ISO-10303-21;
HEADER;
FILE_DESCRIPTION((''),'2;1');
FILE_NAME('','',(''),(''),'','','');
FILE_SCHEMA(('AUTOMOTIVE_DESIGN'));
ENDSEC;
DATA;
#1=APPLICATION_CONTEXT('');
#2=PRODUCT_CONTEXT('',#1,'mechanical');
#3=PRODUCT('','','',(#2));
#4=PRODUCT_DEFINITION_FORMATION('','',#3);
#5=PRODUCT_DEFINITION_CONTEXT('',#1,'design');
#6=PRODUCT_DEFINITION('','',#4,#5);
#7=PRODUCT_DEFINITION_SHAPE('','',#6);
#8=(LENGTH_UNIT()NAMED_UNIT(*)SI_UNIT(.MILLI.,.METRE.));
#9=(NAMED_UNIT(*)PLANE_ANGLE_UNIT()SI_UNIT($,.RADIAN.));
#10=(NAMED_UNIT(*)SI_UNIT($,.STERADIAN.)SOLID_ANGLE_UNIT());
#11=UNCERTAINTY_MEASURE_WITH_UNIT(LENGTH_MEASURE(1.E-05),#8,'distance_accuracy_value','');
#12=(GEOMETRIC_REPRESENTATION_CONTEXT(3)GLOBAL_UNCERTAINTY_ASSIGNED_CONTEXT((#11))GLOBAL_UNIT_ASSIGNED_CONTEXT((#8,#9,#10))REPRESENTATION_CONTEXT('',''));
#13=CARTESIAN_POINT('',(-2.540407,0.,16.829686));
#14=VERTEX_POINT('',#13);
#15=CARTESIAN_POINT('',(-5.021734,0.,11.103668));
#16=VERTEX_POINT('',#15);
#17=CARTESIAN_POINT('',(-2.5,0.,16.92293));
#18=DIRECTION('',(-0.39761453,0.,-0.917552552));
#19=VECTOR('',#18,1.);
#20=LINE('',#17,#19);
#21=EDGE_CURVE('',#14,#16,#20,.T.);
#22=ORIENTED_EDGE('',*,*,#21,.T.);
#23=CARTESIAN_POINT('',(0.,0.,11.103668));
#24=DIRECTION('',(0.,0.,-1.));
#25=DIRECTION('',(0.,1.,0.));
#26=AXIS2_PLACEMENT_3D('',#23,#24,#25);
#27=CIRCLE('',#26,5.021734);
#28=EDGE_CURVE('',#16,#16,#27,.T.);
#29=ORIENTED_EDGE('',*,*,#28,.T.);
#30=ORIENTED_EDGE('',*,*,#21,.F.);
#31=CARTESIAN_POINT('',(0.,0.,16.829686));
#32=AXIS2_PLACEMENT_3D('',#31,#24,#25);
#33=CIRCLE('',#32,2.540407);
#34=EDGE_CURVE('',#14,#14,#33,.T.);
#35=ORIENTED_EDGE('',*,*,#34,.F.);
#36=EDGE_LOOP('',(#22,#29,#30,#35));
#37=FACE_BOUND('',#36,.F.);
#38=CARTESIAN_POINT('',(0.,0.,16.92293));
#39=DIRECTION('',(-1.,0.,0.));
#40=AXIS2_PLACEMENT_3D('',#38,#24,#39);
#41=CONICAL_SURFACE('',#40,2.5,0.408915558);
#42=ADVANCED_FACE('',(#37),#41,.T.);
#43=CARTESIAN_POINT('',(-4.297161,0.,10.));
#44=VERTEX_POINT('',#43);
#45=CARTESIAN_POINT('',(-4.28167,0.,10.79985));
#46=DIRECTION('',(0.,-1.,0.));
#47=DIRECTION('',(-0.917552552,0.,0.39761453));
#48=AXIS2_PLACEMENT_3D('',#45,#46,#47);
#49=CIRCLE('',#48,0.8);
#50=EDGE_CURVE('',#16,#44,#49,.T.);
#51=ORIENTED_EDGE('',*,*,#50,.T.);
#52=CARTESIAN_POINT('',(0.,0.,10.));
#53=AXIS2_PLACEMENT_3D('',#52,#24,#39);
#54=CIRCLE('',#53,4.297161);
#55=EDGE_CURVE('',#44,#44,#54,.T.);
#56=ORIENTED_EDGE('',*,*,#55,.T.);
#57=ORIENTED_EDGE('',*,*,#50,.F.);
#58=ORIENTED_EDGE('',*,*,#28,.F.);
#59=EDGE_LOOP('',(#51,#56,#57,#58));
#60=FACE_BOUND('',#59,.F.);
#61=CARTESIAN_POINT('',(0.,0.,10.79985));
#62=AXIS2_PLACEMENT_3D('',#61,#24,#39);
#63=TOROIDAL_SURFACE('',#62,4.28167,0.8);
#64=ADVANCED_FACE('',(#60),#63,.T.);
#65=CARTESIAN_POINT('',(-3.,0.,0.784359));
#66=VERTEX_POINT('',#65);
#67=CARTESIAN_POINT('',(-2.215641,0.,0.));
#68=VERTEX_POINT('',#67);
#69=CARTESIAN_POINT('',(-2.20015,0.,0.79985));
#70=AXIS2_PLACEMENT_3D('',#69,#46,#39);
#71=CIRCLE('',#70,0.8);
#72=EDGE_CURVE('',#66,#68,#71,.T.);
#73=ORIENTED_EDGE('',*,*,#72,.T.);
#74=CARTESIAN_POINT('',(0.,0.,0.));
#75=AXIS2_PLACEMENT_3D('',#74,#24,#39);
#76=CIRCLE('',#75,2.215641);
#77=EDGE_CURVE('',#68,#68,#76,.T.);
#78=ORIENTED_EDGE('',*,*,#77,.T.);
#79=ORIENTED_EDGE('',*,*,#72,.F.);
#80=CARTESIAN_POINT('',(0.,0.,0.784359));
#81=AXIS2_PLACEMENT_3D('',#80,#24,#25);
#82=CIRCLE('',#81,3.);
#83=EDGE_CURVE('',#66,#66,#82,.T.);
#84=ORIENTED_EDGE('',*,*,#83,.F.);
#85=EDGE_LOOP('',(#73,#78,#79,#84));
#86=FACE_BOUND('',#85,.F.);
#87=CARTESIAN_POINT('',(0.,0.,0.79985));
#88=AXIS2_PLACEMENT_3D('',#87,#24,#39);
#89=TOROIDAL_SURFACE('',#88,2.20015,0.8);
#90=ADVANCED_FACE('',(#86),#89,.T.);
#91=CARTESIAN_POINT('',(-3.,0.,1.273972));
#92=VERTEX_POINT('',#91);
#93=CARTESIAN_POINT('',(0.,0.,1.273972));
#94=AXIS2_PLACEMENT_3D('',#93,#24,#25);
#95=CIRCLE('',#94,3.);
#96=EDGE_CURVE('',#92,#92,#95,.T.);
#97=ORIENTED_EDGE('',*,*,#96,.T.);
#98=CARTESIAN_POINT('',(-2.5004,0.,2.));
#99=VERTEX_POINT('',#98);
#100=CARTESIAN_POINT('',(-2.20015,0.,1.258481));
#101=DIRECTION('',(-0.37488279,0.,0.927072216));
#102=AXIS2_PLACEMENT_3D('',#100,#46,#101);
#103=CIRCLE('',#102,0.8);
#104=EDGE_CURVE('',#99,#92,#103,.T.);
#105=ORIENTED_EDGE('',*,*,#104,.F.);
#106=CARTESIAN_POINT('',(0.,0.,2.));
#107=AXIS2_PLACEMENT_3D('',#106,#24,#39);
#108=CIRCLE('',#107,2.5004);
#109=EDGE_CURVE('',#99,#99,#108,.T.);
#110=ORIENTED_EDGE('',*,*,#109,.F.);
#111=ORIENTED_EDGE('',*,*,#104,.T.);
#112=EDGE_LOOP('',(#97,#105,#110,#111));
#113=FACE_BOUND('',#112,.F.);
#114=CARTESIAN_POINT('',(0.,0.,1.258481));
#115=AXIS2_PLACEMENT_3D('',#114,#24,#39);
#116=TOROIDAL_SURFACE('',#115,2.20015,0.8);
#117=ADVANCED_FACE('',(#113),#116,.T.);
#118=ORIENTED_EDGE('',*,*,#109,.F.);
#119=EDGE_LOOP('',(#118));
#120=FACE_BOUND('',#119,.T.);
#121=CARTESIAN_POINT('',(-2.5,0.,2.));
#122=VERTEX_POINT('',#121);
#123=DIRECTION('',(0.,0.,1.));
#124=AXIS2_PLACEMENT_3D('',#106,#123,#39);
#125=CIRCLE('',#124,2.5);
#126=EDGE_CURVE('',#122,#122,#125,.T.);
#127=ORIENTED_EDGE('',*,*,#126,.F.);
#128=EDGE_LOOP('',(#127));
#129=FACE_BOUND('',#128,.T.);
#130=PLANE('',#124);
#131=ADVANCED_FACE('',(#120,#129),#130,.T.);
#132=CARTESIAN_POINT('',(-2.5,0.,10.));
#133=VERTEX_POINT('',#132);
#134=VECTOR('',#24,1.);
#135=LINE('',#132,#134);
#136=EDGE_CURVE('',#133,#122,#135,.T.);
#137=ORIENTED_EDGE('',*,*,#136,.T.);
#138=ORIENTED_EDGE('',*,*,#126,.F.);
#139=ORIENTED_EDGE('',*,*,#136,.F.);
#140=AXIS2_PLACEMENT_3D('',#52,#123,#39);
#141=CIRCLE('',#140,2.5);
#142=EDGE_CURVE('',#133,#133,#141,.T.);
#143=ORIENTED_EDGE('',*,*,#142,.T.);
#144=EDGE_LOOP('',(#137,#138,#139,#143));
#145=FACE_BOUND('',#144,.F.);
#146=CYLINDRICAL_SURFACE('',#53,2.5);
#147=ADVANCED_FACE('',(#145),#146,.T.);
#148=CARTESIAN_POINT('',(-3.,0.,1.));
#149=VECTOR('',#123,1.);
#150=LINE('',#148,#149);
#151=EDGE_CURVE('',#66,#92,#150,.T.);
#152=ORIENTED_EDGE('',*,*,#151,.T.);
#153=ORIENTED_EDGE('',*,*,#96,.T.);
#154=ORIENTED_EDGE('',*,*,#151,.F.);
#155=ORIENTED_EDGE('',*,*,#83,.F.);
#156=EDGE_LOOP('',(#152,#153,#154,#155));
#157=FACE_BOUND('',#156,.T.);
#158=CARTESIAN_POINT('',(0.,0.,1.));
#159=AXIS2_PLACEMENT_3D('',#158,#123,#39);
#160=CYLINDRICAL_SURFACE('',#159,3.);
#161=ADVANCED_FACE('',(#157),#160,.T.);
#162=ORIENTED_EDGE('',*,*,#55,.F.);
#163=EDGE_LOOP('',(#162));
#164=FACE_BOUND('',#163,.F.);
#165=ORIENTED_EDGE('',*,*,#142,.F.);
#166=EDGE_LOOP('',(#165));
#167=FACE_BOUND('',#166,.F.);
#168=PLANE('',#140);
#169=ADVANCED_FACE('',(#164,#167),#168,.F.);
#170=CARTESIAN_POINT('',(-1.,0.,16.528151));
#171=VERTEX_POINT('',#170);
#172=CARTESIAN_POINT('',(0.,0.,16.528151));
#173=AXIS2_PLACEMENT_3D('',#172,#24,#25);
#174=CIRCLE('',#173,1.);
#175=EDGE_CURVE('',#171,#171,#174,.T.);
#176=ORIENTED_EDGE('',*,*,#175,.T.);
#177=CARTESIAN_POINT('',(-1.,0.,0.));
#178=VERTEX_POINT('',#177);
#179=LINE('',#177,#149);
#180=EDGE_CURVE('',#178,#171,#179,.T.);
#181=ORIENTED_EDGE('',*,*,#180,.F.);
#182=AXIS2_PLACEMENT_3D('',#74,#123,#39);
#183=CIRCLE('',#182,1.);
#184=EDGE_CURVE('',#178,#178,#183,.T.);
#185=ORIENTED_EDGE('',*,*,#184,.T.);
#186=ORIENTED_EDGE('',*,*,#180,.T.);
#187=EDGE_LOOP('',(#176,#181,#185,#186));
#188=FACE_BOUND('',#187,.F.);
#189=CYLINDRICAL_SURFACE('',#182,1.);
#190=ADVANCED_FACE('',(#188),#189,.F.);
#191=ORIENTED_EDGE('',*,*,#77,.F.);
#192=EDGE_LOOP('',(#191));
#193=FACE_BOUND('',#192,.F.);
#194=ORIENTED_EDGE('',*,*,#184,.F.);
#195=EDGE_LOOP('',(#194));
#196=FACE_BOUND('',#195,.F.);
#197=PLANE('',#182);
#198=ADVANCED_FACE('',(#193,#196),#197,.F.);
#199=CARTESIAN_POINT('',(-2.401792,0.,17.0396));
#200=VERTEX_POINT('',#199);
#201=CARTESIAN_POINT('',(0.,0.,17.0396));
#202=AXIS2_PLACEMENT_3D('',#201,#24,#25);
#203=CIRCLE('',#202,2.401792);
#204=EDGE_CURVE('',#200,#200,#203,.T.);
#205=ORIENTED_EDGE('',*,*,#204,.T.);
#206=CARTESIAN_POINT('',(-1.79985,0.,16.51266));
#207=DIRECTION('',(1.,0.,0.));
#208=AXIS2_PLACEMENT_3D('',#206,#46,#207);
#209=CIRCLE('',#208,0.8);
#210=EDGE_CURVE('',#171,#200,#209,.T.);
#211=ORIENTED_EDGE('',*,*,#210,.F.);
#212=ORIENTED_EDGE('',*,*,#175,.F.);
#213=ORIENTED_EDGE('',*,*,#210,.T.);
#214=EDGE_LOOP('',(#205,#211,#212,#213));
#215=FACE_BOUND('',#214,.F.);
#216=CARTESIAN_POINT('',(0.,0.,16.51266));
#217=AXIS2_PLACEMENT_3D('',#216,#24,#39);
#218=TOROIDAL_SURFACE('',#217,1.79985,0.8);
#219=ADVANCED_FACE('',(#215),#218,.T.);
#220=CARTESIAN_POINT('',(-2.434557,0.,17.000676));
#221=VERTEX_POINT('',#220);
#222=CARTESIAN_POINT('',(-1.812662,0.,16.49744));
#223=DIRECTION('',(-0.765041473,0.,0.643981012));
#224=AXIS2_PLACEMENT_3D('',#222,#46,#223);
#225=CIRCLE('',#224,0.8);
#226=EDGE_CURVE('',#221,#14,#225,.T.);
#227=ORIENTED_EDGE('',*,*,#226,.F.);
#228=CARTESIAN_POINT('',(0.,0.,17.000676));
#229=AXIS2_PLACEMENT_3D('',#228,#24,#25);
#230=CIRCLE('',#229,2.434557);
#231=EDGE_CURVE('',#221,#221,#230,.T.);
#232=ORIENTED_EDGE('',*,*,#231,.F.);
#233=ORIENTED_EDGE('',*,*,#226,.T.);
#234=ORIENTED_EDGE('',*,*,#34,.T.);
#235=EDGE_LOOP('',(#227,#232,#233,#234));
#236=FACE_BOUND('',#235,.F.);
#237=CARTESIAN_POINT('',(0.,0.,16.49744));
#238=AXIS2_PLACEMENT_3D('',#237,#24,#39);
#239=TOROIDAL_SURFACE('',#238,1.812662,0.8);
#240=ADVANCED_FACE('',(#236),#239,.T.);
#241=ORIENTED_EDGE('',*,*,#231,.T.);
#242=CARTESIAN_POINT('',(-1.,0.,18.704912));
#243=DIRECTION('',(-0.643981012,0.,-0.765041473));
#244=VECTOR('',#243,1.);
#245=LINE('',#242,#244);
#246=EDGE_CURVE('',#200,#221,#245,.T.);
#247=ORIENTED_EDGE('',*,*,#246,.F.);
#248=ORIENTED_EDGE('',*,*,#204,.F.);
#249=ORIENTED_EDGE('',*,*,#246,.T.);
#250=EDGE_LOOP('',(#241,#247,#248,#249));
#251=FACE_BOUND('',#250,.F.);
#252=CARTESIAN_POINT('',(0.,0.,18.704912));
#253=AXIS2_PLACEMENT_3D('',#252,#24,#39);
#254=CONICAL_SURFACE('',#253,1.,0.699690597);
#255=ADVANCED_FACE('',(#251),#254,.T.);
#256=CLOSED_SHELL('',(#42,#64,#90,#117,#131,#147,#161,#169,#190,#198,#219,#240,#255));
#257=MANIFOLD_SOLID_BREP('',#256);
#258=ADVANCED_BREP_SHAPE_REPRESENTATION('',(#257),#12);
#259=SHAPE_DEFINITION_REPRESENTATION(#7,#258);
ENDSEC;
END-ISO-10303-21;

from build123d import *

# Parameters (mm, degrees)
F0_W = 0.5
F0_H = 2


# Not quite as in the source:
# - a fillet or chamfer that OpenCascade refuses, or shapes differently, is made with other operations: its cross-section is extruded or revolved along the edge and cut away or added


with BuildPart() as f1:
    # F0 (on Front) → F1 (revolve)
    with BuildSketch(Plane.XZ):
        Polygon((-2.5, 0), (-1, 0), (-1, 18.7049116939), (-2.5, 16.9229302555), (-5.5, 10), (-2.5, 10), (-2.5, 2), align=None)
        with Locations((-2.75, 1)):
            Rectangle(F0_W, F0_H)
    revolve(axis=Axis((0, 0, 13.3904740214), (0, 0, 1)))

    # F2: fillet of radius 0.8 on 5 edges, made by hand

    # F2_s1 → F2_t2 (revolve, cut)
    with BuildSketch(Plane.XZ):
        with BuildLine():
            ThreePointArc((-2.424695214, 17.0126243355), (-2.4928760132, 16.918520212), (-2.546704077, 16.8155311495))
            Line((-2.546704077, 16.8155311495), (-2.5613849178, 16.821892982))
            ThreePointArc((-2.5613849178, 16.821892982), (-2.5379640629, 16.8755627139), (-2.5146808408, 16.929292088))
            Line((-2.5146808408, 16.929292088), (-2.5122406636, 16.9332339517))
            ThreePointArc((-2.5122406636, 16.9332339517), (-2.4745308925, 16.9780326932), (-2.4369358776, 17.0229280317))
            Line((-2.4369358776, 17.0229280317), (-2.424695214, 17.0126243355))
        make_face()
    revolve(axis=Axis((0, 0, 16.9229302555), (0, 0, 1)), mode=Mode.SUBTRACT)

    # F2_s3 → F2_t4 (revolve, cut)
    with BuildSketch(Plane.XZ):
        with BuildLine():
            ThreePointArc((-5.0157118449, 11.1179416236), (-4.9504273448, 10.3608017674), (-4.2816698032, 9.99985))
            Line((-4.2816698032, 9.99985), (-4.2816698032, 9.98385))
            ThreePointArc((-4.2816698032, 9.98385), (-4.8908349016, 9.984), (-5.5, 9.984))
            Line((-5.5, 9.984), (-5.5146808408, 10.0063618325))
            ThreePointArc((-5.5146808408, 10.0063618325), (-5.2724679468, 10.5653028232), (-5.0303926857, 11.1243034561))
            Line((-5.0303926857, 11.1243034561), (-5.0157118449, 11.1179416236))
        make_face()
    revolve(axis=Axis((0, 0, 10), (0, 0, 1)), mode=Mode.SUBTRACT)

    # F2_s5 → F2_t6 (revolve, cut)
    with BuildSketch(Plane.XZ):
        with BuildLine():
            ThreePointArc((-0.99985, 16.5126600652), (-1.5256480152, 17.2642006639), (-2.4118831788, 17.0278448749))
            Line((-2.4118831788, 17.0278448749), (-2.4241238423, 17.0381485711))
            ThreePointArc((-2.4241238423, 17.0381485711), (-1.7181248748, 17.876633682), (-1.0122406636, 18.7152153901))
            Line((-1.0122406636, 18.7152153901), (-0.984, 18.7049116939))
            ThreePointArc((-0.984, 18.7049116939), (-0.984, 17.6087858796), (-0.98385, 16.5126600652))
            Line((-0.98385, 16.5126600652), (-0.99985, 16.5126600652))
        make_face()
    revolve(axis=Axis((0, 0, 18.7049116939), (0, 0, 1)), mode=Mode.SUBTRACT)

    # F2_s7 → F2_t8 (revolve, cut)
    with BuildSketch(Plane.XZ):
        with BuildLine():
            ThreePointArc((-2.5000562324, 2.0001390608), (-2.8634466855, 1.7057368158), (-3.00015, 1.2584812882))
            Line((-3.00015, 1.2584812882), (-3.01615, 1.2584812882))
            ThreePointArc((-3.01615, 1.2584812882), (-3.016, 1.6292406441), (-3.016, 2))
            Line((-3.016, 2), (-3, 2.016))
            ThreePointArc((-3, 2.016), (-2.7500281162, 2.016), (-2.5060543571, 2.0149722163))
            Line((-2.5060543571, 2.0149722163), (-2.5000562324, 2.0001390608))
        make_face()
    revolve(axis=Axis((0, 0, 2), (0, 0, 1)), mode=Mode.SUBTRACT)

    # F2_s9 → F2_t10 (revolve, cut)
    with BuildSketch(Plane.XZ):
        with BuildLine():
            ThreePointArc((-3.00015, 0.79985), (-2.7658354249, 0.2341645751), (-2.20015, -0.00015))
            Line((-2.20015, -0.00015), (-2.20015, -0.01615))
            ThreePointArc((-2.20015, -0.01615), (-2.600075, -0.016), (-3, -0.016))
            Line((-3, -0.016), (-3.016, 0))
            ThreePointArc((-3.016, 0), (-3.016, 0.399925), (-3.01615, 0.79985))
            Line((-3.01615, 0.79985), (-3.00015, 0.79985))
        make_face()
    revolve(axis=Axis((0, 0, 0), (0, 0, 1)), mode=Mode.SUBTRACT)


solid = f1.part
